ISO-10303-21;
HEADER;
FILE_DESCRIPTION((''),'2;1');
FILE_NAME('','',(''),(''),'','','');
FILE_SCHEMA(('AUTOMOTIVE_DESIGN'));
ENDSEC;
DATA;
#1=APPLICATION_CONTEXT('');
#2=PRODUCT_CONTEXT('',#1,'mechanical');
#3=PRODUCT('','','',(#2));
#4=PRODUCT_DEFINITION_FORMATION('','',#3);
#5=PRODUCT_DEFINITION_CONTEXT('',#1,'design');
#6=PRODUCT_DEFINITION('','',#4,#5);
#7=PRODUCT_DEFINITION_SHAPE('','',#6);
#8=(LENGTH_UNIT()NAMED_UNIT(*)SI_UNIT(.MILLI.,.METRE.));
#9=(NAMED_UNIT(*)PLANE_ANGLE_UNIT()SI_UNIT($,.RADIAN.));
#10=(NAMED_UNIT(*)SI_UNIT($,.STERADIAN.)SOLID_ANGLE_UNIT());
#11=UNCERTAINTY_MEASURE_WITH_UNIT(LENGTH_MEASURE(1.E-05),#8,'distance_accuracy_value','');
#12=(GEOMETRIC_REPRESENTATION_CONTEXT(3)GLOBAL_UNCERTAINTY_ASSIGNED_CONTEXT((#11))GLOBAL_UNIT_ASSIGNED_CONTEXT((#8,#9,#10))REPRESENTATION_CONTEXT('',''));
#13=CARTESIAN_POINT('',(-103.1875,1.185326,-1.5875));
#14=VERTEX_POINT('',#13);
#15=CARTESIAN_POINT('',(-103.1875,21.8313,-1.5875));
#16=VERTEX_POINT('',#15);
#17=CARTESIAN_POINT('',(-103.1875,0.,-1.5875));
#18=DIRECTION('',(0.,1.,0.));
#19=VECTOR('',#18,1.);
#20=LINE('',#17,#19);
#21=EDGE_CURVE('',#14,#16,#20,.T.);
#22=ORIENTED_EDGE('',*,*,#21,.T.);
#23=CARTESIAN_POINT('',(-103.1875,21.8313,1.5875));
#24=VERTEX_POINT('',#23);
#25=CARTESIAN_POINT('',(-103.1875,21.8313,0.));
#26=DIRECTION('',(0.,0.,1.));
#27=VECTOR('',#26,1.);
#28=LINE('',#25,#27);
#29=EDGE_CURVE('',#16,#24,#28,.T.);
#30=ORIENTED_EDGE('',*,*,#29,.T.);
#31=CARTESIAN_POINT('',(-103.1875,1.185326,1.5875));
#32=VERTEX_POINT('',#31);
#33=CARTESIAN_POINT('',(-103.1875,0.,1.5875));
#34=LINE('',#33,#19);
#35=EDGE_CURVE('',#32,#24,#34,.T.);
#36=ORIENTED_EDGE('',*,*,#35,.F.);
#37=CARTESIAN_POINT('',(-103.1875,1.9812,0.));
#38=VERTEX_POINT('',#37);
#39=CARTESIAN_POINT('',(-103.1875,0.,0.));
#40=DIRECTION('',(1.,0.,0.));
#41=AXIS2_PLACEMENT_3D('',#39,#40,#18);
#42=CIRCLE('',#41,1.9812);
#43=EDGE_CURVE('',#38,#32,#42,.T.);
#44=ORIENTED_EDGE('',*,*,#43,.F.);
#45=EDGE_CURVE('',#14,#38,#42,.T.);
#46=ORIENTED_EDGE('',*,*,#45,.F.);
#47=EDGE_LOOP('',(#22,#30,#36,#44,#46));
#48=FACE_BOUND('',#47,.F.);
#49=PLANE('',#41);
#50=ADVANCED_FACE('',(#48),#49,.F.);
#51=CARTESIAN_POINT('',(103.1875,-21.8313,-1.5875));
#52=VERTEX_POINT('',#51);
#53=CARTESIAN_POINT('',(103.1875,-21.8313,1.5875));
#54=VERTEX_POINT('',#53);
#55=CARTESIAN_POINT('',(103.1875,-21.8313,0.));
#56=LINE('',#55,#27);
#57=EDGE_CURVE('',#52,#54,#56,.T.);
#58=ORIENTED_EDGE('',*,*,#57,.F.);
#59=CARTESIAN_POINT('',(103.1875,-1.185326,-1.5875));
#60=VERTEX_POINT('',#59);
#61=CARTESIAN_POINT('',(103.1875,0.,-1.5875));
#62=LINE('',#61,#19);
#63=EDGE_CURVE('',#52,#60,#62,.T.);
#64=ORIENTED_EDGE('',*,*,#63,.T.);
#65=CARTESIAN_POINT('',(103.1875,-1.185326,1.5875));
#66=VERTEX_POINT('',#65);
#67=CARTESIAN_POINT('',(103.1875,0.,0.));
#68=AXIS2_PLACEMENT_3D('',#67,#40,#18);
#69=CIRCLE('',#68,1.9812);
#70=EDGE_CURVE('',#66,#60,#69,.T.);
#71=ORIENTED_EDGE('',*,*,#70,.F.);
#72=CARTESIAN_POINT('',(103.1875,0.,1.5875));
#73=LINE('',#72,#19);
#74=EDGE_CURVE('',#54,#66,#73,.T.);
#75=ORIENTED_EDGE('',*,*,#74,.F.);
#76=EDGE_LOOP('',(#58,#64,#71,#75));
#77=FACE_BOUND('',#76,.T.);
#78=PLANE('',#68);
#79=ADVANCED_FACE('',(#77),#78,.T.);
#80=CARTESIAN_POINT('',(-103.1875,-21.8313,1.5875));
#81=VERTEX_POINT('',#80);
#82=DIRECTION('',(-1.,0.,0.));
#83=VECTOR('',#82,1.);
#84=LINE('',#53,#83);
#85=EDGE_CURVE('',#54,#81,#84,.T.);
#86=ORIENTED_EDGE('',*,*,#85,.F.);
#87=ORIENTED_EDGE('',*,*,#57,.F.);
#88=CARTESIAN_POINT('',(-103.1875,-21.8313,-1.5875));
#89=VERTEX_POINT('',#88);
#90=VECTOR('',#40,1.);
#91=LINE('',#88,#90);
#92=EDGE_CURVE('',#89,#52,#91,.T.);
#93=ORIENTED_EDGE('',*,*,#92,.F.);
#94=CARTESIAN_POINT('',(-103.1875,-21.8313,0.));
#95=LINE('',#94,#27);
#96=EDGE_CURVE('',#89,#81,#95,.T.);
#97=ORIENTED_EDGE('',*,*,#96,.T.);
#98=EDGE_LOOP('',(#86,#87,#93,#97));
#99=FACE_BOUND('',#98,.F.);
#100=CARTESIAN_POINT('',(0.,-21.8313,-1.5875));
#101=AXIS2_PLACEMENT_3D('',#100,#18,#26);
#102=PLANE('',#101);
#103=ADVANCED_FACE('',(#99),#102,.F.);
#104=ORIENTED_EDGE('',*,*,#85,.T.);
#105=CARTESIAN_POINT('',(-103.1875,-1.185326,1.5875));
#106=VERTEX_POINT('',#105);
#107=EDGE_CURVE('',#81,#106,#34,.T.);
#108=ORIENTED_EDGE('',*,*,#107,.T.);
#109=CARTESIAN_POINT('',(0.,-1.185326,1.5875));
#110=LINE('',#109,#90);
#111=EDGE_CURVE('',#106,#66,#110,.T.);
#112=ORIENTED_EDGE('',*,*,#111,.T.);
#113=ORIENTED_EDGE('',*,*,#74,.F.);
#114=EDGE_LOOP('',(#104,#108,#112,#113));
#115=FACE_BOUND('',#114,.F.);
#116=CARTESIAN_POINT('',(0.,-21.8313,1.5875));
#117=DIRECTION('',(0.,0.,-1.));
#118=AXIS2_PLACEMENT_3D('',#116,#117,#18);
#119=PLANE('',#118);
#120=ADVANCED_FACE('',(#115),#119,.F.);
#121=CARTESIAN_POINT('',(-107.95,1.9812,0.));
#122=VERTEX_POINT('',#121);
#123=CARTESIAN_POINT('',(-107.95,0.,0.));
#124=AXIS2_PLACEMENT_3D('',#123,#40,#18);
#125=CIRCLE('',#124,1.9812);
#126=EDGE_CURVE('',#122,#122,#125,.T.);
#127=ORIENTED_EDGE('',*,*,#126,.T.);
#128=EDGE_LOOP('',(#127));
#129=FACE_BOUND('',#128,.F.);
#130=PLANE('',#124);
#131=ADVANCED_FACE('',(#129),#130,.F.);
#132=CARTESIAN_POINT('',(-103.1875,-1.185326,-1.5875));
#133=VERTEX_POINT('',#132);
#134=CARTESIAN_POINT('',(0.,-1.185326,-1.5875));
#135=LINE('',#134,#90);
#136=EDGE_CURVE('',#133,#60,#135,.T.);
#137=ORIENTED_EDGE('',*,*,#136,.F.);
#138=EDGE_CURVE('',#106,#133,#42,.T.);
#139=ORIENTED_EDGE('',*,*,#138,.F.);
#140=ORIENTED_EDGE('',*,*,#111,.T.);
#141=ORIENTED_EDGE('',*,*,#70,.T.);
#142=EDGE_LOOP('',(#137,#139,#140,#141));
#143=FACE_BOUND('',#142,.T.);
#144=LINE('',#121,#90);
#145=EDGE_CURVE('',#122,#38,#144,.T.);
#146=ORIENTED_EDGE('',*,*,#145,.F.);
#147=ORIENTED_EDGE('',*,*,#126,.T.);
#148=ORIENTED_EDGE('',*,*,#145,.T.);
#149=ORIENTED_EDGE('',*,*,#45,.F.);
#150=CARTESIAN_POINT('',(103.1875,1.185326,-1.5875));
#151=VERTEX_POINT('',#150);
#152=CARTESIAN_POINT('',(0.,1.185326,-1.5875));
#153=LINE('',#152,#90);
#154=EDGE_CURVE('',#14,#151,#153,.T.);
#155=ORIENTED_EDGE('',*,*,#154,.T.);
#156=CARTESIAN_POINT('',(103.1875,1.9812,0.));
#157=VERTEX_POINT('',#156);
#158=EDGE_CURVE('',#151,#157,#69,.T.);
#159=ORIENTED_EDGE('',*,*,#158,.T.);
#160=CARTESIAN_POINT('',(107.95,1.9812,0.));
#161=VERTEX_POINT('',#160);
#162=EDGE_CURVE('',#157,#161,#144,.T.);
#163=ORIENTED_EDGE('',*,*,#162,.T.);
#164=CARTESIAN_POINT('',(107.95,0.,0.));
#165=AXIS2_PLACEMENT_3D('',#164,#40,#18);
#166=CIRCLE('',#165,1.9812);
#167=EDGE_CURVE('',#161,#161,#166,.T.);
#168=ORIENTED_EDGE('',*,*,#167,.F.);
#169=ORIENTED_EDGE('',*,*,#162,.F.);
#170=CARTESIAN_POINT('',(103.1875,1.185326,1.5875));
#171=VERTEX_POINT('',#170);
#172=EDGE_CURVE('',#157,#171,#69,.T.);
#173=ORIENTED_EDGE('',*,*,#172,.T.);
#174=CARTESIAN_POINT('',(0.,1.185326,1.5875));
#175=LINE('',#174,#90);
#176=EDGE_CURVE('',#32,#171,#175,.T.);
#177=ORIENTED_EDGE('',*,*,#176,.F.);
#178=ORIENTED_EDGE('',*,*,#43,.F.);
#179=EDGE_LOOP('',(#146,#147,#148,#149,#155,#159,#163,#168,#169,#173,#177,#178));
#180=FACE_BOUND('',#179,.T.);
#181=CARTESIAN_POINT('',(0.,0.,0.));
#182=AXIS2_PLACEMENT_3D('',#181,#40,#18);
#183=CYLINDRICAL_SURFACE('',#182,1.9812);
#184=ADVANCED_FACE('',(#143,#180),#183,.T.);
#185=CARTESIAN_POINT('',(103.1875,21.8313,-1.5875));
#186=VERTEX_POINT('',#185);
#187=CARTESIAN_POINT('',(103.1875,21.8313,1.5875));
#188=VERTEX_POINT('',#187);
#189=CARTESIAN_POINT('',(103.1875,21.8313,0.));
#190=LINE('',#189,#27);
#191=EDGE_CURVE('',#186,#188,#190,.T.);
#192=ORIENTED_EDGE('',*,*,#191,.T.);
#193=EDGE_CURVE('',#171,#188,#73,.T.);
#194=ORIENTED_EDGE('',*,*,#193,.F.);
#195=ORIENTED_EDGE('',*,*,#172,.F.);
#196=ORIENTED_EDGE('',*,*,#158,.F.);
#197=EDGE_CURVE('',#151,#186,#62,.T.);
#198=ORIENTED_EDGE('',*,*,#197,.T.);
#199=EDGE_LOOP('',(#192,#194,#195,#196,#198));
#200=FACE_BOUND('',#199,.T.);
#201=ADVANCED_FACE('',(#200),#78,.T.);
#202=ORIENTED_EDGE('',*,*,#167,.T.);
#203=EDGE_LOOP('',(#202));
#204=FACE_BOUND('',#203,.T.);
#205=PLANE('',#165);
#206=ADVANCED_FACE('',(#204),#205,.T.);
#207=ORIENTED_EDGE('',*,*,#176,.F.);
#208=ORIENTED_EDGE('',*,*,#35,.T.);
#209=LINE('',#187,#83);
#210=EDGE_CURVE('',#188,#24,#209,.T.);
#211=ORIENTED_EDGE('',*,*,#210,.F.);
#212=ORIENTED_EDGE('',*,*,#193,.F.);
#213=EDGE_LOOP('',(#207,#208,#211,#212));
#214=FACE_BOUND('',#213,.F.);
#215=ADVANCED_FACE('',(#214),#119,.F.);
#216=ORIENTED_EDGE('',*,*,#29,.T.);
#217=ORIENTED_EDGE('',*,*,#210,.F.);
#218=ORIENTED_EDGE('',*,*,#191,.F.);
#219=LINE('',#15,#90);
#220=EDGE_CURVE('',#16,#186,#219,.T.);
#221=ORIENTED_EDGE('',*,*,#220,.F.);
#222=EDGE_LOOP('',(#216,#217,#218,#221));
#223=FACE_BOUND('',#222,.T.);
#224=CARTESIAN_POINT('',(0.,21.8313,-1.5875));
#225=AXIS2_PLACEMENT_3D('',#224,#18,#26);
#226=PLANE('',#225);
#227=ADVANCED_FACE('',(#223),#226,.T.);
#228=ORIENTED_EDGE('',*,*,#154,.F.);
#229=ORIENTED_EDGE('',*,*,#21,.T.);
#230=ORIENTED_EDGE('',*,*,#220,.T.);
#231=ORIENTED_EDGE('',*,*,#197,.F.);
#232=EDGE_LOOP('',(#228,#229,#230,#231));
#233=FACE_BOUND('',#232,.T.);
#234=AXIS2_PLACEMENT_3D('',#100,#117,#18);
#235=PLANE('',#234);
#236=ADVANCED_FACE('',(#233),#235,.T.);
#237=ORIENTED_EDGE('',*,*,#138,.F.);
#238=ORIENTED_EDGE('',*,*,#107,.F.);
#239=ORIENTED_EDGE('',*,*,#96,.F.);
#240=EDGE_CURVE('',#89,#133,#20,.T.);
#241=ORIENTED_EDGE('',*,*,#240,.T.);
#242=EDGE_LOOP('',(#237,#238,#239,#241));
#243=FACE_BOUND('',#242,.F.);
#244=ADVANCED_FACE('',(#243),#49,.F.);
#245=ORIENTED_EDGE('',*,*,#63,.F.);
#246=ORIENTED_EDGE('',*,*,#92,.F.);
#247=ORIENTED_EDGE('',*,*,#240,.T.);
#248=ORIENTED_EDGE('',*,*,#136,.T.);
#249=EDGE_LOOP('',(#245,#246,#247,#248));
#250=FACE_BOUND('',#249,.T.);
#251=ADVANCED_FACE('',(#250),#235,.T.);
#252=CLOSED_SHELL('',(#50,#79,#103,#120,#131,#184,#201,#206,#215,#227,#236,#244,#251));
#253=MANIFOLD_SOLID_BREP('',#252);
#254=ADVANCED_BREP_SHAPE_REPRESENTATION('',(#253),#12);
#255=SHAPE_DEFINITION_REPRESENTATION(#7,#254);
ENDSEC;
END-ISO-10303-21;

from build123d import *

# Parameters (mm, degrees)
F1_W     = 43.6626
F1_H     = 3.175
F2_DEPTH = 103.1875
F3_R     = 1.9812
F4_DEPTH = 107.95


# Not quite as in the source:
# - a variable given as a bare number and used for a length is read in inches; the dataset says mm whatever the document's units were


with BuildPart() as f2:
    # F1 (on Right) → F2 (new body, symmetric)
    with BuildSketch(Plane.YZ):
        Rectangle(F1_W, F1_H)
    extrude(amount=F2_DEPTH, both=True)

    # F3 (on Right) → F4 (join, symmetric)
    with BuildSketch(Plane.YZ):
        Circle(F3_R)
    extrude(amount=F4_DEPTH, both=True)


solid = f2.part
